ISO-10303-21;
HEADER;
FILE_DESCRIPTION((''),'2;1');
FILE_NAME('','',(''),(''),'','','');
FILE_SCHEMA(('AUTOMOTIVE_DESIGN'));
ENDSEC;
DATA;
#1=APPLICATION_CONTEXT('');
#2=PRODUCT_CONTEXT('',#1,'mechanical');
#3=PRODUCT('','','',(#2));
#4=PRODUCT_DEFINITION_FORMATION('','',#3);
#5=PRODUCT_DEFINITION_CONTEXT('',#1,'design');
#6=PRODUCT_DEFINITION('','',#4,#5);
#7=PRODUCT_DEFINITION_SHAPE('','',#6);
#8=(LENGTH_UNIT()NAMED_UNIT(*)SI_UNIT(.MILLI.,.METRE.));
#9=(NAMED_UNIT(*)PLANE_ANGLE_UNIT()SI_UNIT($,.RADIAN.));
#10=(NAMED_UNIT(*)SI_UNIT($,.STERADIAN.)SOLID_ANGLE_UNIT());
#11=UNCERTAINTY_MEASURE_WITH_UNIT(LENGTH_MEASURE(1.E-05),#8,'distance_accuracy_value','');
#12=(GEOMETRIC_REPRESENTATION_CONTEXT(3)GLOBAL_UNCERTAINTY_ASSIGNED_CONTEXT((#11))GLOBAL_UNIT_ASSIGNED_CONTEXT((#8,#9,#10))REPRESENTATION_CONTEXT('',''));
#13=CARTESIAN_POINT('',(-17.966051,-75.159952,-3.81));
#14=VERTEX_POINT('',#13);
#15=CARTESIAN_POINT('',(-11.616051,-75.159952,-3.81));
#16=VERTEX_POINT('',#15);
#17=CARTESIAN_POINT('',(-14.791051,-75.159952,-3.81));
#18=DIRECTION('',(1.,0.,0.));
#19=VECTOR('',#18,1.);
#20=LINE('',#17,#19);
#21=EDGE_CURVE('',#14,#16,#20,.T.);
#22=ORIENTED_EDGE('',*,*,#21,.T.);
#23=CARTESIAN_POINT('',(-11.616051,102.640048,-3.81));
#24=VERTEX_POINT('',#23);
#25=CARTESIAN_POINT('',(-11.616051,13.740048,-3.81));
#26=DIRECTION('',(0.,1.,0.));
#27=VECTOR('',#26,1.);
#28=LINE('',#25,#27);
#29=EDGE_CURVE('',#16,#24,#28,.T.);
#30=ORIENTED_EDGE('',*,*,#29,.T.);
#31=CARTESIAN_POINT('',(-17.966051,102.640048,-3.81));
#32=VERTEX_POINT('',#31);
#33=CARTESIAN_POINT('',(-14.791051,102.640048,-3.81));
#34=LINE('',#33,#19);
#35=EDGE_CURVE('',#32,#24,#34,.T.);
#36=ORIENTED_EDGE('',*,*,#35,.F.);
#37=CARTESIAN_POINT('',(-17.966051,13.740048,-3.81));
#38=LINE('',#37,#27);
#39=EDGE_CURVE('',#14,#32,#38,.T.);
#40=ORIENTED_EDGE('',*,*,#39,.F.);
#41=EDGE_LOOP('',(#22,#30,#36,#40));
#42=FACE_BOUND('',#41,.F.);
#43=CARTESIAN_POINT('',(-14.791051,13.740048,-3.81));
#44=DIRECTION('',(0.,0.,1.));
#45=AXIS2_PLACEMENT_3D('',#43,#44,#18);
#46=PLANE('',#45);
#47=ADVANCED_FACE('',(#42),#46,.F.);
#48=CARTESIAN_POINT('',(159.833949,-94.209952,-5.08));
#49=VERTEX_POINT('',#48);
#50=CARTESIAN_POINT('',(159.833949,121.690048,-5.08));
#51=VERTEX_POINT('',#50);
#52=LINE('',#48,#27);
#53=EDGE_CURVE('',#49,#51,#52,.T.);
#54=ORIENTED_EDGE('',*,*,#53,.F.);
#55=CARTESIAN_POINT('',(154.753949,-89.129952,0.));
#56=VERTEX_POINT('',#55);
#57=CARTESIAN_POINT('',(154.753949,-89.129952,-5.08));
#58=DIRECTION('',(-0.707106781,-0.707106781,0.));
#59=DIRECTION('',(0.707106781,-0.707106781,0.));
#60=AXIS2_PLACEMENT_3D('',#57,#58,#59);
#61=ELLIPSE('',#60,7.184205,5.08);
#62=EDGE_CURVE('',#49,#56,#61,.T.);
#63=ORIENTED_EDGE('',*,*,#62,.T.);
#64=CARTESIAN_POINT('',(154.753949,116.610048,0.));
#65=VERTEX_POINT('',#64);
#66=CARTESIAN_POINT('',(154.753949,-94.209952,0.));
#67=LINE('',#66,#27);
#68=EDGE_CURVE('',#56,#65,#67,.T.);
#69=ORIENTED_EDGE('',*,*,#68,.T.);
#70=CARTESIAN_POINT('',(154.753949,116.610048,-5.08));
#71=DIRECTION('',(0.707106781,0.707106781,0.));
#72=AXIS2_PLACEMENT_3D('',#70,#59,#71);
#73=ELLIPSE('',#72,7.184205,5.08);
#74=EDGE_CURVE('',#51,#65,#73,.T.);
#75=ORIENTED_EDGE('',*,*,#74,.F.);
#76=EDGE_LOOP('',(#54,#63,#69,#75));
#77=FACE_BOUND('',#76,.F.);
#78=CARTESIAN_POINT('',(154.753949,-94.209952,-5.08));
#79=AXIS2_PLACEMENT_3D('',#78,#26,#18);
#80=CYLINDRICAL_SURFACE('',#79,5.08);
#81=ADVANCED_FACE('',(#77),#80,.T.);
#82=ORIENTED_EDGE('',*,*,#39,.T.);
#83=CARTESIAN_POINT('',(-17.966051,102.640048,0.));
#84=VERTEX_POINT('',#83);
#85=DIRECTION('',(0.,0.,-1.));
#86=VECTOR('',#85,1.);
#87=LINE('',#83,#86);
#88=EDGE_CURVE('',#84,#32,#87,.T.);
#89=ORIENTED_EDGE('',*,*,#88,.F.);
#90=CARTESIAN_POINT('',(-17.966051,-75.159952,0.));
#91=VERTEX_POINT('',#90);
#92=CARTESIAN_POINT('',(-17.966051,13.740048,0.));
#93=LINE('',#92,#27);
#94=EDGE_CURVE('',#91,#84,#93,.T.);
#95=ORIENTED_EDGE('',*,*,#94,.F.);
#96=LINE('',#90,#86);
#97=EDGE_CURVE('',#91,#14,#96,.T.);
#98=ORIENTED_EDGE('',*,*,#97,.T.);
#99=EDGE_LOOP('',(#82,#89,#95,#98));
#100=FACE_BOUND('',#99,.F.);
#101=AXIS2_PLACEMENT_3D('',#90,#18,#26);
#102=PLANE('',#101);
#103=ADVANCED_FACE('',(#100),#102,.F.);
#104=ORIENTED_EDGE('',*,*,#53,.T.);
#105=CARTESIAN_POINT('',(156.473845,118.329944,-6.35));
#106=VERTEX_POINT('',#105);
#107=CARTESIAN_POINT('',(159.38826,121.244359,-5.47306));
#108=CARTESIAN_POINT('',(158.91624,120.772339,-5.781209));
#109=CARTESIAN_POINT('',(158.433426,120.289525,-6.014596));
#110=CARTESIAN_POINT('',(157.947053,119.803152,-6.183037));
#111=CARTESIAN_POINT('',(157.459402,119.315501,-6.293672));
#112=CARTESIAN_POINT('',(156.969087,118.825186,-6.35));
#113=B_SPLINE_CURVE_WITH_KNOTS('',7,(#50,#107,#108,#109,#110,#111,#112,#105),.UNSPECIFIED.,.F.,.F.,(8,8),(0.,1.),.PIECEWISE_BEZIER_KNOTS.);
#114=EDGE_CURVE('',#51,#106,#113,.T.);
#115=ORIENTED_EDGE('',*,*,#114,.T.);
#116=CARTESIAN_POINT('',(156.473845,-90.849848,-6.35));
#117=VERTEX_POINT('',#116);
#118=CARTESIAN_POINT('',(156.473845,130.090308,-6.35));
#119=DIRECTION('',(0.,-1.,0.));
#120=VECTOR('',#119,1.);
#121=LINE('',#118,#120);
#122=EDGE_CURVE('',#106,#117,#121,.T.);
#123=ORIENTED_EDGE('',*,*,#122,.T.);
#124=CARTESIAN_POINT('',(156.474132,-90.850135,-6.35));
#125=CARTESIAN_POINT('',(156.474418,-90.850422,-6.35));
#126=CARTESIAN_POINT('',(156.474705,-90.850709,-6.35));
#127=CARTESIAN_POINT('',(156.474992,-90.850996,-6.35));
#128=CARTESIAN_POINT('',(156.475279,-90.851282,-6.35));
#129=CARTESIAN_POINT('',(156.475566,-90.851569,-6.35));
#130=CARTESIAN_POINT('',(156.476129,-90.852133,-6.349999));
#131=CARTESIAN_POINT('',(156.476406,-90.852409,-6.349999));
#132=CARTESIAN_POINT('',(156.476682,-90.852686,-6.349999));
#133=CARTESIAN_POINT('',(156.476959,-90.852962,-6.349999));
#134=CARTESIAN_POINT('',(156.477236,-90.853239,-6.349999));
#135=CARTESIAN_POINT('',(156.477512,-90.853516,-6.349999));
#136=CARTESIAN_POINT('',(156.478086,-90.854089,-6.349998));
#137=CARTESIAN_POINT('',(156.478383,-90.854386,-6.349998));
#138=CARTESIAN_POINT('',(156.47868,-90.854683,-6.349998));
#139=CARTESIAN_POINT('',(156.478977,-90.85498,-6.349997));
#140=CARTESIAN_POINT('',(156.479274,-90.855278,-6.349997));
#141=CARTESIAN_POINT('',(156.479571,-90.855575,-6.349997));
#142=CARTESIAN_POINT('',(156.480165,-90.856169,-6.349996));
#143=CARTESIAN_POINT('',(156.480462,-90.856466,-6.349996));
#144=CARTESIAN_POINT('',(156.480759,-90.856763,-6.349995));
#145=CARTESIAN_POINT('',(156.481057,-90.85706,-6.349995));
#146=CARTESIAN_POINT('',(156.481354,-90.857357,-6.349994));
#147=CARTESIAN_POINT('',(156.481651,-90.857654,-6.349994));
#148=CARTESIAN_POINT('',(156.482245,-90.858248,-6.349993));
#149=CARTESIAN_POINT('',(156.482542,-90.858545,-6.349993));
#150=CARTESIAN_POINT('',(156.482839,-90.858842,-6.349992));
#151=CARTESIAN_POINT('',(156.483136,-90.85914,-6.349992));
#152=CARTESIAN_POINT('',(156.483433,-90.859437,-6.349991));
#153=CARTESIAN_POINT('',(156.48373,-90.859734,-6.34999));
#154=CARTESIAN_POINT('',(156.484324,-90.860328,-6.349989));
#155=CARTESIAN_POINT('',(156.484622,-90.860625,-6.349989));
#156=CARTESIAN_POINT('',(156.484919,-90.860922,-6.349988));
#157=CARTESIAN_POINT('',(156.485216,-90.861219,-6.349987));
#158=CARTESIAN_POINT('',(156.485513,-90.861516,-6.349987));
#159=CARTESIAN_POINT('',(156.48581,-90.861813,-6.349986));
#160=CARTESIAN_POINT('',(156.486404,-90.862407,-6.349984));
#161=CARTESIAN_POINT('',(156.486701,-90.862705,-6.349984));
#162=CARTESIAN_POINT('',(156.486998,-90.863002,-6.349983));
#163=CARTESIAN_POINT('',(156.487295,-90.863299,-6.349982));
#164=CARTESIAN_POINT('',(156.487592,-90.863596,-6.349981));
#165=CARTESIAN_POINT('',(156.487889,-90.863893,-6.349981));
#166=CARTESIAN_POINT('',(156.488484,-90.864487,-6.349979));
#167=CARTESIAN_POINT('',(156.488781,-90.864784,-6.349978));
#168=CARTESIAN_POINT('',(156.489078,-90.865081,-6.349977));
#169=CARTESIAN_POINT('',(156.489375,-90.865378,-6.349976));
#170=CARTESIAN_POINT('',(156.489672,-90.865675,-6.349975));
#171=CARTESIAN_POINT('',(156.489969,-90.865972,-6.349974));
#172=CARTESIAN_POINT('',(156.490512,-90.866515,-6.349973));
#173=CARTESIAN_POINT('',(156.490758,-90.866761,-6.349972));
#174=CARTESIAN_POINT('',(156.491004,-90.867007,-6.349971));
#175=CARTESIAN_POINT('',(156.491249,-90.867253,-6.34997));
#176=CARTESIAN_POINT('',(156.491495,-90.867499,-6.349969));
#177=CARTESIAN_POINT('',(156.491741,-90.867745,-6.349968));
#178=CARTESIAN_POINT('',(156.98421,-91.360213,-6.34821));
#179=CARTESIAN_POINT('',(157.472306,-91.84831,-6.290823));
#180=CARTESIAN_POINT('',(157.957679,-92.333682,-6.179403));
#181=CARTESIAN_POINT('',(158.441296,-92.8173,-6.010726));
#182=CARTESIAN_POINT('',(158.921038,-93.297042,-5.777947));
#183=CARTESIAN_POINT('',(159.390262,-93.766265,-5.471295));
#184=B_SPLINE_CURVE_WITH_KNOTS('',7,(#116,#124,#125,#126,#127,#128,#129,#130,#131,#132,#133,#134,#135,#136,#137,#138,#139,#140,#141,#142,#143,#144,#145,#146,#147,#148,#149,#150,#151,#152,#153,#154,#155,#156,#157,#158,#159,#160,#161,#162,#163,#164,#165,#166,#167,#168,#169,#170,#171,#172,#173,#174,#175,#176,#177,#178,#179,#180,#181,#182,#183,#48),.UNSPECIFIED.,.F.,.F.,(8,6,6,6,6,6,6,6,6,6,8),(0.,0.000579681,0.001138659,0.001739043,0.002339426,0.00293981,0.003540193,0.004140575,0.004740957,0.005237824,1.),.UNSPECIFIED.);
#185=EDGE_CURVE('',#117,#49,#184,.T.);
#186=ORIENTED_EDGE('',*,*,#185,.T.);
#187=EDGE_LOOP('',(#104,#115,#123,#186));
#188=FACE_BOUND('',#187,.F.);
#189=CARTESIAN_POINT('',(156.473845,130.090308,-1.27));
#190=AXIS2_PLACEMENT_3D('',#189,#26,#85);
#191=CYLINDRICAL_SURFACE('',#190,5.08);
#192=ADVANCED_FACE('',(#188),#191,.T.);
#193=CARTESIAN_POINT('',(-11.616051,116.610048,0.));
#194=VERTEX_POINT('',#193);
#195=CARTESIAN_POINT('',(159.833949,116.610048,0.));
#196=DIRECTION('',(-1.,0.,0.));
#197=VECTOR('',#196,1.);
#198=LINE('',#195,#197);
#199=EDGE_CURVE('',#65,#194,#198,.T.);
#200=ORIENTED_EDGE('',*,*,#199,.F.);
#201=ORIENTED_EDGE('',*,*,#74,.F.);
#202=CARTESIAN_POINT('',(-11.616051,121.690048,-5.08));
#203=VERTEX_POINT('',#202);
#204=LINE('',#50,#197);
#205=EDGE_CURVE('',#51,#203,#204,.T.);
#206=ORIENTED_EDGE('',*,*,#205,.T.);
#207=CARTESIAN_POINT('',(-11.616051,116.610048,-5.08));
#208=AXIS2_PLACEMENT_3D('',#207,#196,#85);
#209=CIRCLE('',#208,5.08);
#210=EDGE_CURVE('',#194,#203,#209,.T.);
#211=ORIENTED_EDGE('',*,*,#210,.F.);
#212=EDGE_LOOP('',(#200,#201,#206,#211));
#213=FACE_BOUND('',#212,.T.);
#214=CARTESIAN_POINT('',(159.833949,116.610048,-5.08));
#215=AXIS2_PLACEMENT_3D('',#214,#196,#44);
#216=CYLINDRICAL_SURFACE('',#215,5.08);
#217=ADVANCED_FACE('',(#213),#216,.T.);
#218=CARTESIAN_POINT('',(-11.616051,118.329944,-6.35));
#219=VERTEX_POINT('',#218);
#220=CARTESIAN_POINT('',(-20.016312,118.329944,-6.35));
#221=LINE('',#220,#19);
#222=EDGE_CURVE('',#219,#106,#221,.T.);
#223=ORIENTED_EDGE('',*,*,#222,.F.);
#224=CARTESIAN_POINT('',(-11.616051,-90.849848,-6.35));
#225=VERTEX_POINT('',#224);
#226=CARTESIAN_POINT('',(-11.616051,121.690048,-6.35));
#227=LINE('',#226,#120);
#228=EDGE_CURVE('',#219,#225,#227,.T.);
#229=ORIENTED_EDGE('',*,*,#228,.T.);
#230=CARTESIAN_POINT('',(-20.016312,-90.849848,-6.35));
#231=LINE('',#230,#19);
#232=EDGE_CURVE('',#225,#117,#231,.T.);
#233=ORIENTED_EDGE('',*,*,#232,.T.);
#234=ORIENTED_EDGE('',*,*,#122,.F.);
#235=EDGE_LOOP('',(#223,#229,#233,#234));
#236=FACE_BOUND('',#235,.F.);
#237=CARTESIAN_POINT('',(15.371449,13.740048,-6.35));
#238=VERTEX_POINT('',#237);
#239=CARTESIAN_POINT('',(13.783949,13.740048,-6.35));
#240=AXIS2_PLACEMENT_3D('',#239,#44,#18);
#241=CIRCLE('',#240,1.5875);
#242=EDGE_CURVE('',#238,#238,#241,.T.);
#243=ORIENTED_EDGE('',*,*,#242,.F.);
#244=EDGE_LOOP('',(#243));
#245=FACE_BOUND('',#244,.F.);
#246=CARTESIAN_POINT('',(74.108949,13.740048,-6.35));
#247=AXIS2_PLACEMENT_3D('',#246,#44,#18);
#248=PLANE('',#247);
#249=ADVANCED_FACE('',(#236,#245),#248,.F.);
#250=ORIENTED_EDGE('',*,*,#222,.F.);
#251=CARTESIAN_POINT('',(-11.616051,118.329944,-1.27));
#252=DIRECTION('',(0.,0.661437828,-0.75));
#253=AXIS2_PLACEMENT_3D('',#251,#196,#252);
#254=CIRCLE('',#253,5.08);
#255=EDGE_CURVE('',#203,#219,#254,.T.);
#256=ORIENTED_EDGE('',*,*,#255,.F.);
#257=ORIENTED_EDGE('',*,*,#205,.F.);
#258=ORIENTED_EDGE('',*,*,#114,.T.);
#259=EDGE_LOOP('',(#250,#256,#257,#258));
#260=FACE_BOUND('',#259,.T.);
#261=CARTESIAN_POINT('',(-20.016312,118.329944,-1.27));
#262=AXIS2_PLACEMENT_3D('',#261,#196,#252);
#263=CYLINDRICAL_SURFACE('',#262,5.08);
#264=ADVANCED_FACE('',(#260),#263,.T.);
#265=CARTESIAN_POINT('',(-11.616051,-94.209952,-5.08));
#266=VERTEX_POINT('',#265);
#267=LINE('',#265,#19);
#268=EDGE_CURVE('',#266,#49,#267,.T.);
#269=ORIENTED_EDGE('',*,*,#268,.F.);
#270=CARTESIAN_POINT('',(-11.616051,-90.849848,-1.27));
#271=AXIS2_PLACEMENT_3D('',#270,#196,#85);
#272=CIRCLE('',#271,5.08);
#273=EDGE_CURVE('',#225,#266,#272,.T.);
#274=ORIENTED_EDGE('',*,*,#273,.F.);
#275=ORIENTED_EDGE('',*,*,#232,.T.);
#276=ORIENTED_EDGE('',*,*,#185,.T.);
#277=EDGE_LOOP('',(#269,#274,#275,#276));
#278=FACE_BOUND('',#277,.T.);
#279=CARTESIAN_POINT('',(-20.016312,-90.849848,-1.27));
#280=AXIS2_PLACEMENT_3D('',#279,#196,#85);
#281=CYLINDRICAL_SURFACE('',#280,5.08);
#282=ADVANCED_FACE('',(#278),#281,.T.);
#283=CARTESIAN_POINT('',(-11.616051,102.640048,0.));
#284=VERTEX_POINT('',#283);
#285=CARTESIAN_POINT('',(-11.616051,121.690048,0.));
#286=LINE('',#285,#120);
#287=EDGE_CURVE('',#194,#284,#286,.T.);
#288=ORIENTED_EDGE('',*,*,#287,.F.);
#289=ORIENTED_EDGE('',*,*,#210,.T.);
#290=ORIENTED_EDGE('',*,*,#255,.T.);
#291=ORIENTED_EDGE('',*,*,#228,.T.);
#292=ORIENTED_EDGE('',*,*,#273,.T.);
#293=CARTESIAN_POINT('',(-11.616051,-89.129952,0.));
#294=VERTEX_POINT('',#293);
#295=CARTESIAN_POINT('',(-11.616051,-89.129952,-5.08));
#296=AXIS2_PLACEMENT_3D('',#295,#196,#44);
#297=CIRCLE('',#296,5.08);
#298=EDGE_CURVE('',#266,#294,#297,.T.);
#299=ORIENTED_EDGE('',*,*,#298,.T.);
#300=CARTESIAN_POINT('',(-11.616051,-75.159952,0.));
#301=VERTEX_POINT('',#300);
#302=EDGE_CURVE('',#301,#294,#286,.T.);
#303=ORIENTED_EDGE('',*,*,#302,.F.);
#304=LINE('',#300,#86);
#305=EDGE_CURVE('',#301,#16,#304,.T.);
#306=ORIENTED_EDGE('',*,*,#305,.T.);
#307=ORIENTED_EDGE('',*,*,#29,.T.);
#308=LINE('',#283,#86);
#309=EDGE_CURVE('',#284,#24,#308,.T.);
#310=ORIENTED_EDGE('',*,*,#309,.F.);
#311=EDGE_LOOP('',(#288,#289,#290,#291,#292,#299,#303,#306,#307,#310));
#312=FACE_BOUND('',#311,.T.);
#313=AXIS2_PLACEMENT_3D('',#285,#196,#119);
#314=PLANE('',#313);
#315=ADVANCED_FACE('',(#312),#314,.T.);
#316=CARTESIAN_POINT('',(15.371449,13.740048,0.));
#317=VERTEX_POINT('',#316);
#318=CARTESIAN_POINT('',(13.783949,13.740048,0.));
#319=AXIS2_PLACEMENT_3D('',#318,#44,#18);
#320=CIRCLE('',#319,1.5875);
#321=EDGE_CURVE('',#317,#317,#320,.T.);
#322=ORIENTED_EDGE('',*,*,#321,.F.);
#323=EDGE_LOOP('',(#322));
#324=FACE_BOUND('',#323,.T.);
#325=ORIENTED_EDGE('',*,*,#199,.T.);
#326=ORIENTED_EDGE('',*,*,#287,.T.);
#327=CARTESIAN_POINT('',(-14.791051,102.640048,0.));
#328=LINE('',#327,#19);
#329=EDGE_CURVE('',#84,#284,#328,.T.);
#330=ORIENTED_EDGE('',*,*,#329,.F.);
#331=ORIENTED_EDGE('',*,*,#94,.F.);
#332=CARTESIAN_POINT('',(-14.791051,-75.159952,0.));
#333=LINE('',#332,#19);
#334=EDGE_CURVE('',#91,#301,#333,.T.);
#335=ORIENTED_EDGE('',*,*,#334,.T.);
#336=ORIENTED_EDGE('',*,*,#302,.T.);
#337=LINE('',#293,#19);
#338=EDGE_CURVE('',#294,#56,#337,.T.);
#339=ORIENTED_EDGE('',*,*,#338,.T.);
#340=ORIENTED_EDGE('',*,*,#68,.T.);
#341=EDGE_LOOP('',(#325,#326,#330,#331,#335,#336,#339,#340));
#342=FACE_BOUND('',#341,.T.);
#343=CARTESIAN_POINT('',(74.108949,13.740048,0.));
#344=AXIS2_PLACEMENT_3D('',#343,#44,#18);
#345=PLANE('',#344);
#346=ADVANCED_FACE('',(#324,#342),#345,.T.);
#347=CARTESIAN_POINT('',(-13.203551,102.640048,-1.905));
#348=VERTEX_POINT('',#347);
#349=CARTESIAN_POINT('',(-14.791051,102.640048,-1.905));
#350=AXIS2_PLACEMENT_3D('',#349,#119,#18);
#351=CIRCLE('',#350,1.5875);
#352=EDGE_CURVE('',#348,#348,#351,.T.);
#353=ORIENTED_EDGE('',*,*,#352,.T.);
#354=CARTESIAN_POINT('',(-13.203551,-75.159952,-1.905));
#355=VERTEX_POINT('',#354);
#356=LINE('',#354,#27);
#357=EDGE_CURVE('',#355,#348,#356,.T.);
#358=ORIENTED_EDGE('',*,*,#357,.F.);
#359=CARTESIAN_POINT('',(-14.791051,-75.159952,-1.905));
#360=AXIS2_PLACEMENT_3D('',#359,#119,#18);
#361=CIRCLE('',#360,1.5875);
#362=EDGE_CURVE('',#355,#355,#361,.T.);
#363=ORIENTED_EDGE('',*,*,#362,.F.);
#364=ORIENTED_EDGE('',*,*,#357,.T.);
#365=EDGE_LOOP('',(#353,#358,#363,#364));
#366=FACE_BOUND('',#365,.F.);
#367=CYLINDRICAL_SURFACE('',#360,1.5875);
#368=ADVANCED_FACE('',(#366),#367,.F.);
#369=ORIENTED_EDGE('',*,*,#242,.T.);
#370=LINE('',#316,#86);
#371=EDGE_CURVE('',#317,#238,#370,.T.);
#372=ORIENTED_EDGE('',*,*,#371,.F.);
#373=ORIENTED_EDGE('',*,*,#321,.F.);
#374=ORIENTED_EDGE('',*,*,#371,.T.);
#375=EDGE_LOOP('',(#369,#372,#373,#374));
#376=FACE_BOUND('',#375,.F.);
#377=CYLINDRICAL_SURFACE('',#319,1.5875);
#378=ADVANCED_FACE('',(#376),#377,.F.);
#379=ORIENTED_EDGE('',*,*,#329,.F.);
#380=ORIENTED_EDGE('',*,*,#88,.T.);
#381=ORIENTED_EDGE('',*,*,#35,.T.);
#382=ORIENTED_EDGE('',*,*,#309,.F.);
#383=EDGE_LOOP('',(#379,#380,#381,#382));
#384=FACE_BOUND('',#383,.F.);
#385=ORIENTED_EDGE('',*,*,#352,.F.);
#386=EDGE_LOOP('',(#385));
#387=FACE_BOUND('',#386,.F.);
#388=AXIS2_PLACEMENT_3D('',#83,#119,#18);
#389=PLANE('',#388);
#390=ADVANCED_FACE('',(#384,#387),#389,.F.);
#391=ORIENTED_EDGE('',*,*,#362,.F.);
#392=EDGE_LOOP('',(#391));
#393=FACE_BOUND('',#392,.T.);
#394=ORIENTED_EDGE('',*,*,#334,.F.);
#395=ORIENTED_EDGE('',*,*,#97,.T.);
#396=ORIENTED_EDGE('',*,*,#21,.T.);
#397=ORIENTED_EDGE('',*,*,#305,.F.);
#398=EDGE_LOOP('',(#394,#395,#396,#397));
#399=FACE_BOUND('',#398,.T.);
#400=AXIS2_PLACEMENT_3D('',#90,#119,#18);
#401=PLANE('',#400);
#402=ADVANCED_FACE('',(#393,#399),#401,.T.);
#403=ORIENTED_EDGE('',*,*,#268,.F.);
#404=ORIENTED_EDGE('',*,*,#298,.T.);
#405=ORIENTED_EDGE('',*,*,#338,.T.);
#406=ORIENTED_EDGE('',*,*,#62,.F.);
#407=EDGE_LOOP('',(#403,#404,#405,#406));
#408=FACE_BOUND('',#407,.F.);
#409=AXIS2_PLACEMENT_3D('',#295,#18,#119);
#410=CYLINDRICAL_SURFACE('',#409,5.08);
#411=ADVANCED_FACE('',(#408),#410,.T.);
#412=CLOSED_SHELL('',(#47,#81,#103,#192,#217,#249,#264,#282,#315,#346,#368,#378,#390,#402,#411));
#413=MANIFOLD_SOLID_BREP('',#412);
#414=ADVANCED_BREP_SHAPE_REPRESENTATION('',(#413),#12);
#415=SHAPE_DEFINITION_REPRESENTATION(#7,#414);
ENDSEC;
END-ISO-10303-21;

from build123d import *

# Parameters (mm, degrees)
F1_DEPTH    = 6.35
F0_W        = 6.35
F0_H        = 177.8
F2_DEPTH    = 3.81
F3_R        = 1.5875
F4_DEPTH    = 177.8
F5_R        = 1.5875
F6_DEPTH    = 6.35
F7_R        = 5.08
F8_T1_DEPTH = 232.7005208253
F8_T3_DEPTH = 188.2505208253


# Not quite as in the source:
# - a fillet or chamfer that OpenCascade refuses, or shapes differently, is made with other operations: its cross-section is extruded or revolved along the edge and cut away or added


with BuildPart() as f1:
    # F0 (on Top) → F1 (new body)
    with BuildSketch(Plane.XY):
        Polygon((-11.6160511255, 102.6400476694), (-11.6160511255, -75.1599523306), (-11.6160511255, -94.2099523306), (159.8339488745, -94.2099523306), (159.8339488745, 121.6900476694), (-11.6160511255, 121.6900476694), align=None)
    extrude(amount=-F1_DEPTH)

    # F0 (on Top) → F2 (join)
    with BuildSketch(Plane.XY):
        with Locations((-14.7910511255, 13.7400476694)):
            Rectangle(F0_W, F0_H)
    extrude(amount=-F2_DEPTH)

    # F3 (on face) → F4 (cut)
    with BuildSketch(Plane.XZ.offset(75.1599523306)):
        with Locations((-14.7910511255, -1.905)):
            Circle(F3_R)
    extrude(amount=-F4_DEPTH, mode=Mode.SUBTRACT)

    # F5 (on face) → F6 (cut)
    with BuildSketch(Plane.XY):
        with Locations((13.7839488745, 13.7400476694)):
            Circle(F5_R)
    extrude(amount=-F6_DEPTH, mode=Mode.SUBTRACT)

    # F7
    f7_edges = [f1.edges().sort_by_distance(p)[0] for p in [
        (74.108949, -94.209952, 0),
        (159.833949, 13.740048, 0),
        (74.108949, 121.690048, 0),
    ]]
    fillet(f7_edges, radius=F7_R)

    # F8: fillet of radius 5.08 on 3 edges, made by hand

    # F8_s2 → F8_t1 (cut)
    with BuildSketch(Plane.XZ.offset(-130.090308082)):
        with BuildLine():
            ThreePointArc((156.4738447094, -6.35), (158.2698959336, -6.0219048812), (159.8339488745, -5.08))
            Line((159.8339488745, -5.08), (159.8339488745, -6.35))
            Line((159.8339488745, -6.35), (156.4738447094, -6.35))
        make_face()
    extrude(amount=F8_T1_DEPTH, mode=Mode.SUBTRACT)

    # F8_s4 → F8_t3 (cut)
    with BuildSketch(Plane.YZ.offset(-20.0163115382)):
        with BuildLine():
            ThreePointArc((-90.8498481655, -6.35), (-92.6458993898, -6.0219048812), (-94.2099523306, -5.08))
            Line((-94.2099523306, -5.08), (-94.2099523306, -6.35))
            Line((-94.2099523306, -6.35), (-90.8498481655, -6.35))
        make_face()
        with BuildLine():
            ThreePointArc((121.6900476694, -5.08), (120.1259947286, -6.0219048812), (118.3299435044, -6.35))
            Line((118.3299435044, -6.35), (121.6900476694, -6.35))
            Line((121.6900476694, -6.35), (121.6900476694, -5.08))
        make_face()
    extrude(amount=F8_T3_DEPTH, mode=Mode.SUBTRACT)


solid = f1.part
